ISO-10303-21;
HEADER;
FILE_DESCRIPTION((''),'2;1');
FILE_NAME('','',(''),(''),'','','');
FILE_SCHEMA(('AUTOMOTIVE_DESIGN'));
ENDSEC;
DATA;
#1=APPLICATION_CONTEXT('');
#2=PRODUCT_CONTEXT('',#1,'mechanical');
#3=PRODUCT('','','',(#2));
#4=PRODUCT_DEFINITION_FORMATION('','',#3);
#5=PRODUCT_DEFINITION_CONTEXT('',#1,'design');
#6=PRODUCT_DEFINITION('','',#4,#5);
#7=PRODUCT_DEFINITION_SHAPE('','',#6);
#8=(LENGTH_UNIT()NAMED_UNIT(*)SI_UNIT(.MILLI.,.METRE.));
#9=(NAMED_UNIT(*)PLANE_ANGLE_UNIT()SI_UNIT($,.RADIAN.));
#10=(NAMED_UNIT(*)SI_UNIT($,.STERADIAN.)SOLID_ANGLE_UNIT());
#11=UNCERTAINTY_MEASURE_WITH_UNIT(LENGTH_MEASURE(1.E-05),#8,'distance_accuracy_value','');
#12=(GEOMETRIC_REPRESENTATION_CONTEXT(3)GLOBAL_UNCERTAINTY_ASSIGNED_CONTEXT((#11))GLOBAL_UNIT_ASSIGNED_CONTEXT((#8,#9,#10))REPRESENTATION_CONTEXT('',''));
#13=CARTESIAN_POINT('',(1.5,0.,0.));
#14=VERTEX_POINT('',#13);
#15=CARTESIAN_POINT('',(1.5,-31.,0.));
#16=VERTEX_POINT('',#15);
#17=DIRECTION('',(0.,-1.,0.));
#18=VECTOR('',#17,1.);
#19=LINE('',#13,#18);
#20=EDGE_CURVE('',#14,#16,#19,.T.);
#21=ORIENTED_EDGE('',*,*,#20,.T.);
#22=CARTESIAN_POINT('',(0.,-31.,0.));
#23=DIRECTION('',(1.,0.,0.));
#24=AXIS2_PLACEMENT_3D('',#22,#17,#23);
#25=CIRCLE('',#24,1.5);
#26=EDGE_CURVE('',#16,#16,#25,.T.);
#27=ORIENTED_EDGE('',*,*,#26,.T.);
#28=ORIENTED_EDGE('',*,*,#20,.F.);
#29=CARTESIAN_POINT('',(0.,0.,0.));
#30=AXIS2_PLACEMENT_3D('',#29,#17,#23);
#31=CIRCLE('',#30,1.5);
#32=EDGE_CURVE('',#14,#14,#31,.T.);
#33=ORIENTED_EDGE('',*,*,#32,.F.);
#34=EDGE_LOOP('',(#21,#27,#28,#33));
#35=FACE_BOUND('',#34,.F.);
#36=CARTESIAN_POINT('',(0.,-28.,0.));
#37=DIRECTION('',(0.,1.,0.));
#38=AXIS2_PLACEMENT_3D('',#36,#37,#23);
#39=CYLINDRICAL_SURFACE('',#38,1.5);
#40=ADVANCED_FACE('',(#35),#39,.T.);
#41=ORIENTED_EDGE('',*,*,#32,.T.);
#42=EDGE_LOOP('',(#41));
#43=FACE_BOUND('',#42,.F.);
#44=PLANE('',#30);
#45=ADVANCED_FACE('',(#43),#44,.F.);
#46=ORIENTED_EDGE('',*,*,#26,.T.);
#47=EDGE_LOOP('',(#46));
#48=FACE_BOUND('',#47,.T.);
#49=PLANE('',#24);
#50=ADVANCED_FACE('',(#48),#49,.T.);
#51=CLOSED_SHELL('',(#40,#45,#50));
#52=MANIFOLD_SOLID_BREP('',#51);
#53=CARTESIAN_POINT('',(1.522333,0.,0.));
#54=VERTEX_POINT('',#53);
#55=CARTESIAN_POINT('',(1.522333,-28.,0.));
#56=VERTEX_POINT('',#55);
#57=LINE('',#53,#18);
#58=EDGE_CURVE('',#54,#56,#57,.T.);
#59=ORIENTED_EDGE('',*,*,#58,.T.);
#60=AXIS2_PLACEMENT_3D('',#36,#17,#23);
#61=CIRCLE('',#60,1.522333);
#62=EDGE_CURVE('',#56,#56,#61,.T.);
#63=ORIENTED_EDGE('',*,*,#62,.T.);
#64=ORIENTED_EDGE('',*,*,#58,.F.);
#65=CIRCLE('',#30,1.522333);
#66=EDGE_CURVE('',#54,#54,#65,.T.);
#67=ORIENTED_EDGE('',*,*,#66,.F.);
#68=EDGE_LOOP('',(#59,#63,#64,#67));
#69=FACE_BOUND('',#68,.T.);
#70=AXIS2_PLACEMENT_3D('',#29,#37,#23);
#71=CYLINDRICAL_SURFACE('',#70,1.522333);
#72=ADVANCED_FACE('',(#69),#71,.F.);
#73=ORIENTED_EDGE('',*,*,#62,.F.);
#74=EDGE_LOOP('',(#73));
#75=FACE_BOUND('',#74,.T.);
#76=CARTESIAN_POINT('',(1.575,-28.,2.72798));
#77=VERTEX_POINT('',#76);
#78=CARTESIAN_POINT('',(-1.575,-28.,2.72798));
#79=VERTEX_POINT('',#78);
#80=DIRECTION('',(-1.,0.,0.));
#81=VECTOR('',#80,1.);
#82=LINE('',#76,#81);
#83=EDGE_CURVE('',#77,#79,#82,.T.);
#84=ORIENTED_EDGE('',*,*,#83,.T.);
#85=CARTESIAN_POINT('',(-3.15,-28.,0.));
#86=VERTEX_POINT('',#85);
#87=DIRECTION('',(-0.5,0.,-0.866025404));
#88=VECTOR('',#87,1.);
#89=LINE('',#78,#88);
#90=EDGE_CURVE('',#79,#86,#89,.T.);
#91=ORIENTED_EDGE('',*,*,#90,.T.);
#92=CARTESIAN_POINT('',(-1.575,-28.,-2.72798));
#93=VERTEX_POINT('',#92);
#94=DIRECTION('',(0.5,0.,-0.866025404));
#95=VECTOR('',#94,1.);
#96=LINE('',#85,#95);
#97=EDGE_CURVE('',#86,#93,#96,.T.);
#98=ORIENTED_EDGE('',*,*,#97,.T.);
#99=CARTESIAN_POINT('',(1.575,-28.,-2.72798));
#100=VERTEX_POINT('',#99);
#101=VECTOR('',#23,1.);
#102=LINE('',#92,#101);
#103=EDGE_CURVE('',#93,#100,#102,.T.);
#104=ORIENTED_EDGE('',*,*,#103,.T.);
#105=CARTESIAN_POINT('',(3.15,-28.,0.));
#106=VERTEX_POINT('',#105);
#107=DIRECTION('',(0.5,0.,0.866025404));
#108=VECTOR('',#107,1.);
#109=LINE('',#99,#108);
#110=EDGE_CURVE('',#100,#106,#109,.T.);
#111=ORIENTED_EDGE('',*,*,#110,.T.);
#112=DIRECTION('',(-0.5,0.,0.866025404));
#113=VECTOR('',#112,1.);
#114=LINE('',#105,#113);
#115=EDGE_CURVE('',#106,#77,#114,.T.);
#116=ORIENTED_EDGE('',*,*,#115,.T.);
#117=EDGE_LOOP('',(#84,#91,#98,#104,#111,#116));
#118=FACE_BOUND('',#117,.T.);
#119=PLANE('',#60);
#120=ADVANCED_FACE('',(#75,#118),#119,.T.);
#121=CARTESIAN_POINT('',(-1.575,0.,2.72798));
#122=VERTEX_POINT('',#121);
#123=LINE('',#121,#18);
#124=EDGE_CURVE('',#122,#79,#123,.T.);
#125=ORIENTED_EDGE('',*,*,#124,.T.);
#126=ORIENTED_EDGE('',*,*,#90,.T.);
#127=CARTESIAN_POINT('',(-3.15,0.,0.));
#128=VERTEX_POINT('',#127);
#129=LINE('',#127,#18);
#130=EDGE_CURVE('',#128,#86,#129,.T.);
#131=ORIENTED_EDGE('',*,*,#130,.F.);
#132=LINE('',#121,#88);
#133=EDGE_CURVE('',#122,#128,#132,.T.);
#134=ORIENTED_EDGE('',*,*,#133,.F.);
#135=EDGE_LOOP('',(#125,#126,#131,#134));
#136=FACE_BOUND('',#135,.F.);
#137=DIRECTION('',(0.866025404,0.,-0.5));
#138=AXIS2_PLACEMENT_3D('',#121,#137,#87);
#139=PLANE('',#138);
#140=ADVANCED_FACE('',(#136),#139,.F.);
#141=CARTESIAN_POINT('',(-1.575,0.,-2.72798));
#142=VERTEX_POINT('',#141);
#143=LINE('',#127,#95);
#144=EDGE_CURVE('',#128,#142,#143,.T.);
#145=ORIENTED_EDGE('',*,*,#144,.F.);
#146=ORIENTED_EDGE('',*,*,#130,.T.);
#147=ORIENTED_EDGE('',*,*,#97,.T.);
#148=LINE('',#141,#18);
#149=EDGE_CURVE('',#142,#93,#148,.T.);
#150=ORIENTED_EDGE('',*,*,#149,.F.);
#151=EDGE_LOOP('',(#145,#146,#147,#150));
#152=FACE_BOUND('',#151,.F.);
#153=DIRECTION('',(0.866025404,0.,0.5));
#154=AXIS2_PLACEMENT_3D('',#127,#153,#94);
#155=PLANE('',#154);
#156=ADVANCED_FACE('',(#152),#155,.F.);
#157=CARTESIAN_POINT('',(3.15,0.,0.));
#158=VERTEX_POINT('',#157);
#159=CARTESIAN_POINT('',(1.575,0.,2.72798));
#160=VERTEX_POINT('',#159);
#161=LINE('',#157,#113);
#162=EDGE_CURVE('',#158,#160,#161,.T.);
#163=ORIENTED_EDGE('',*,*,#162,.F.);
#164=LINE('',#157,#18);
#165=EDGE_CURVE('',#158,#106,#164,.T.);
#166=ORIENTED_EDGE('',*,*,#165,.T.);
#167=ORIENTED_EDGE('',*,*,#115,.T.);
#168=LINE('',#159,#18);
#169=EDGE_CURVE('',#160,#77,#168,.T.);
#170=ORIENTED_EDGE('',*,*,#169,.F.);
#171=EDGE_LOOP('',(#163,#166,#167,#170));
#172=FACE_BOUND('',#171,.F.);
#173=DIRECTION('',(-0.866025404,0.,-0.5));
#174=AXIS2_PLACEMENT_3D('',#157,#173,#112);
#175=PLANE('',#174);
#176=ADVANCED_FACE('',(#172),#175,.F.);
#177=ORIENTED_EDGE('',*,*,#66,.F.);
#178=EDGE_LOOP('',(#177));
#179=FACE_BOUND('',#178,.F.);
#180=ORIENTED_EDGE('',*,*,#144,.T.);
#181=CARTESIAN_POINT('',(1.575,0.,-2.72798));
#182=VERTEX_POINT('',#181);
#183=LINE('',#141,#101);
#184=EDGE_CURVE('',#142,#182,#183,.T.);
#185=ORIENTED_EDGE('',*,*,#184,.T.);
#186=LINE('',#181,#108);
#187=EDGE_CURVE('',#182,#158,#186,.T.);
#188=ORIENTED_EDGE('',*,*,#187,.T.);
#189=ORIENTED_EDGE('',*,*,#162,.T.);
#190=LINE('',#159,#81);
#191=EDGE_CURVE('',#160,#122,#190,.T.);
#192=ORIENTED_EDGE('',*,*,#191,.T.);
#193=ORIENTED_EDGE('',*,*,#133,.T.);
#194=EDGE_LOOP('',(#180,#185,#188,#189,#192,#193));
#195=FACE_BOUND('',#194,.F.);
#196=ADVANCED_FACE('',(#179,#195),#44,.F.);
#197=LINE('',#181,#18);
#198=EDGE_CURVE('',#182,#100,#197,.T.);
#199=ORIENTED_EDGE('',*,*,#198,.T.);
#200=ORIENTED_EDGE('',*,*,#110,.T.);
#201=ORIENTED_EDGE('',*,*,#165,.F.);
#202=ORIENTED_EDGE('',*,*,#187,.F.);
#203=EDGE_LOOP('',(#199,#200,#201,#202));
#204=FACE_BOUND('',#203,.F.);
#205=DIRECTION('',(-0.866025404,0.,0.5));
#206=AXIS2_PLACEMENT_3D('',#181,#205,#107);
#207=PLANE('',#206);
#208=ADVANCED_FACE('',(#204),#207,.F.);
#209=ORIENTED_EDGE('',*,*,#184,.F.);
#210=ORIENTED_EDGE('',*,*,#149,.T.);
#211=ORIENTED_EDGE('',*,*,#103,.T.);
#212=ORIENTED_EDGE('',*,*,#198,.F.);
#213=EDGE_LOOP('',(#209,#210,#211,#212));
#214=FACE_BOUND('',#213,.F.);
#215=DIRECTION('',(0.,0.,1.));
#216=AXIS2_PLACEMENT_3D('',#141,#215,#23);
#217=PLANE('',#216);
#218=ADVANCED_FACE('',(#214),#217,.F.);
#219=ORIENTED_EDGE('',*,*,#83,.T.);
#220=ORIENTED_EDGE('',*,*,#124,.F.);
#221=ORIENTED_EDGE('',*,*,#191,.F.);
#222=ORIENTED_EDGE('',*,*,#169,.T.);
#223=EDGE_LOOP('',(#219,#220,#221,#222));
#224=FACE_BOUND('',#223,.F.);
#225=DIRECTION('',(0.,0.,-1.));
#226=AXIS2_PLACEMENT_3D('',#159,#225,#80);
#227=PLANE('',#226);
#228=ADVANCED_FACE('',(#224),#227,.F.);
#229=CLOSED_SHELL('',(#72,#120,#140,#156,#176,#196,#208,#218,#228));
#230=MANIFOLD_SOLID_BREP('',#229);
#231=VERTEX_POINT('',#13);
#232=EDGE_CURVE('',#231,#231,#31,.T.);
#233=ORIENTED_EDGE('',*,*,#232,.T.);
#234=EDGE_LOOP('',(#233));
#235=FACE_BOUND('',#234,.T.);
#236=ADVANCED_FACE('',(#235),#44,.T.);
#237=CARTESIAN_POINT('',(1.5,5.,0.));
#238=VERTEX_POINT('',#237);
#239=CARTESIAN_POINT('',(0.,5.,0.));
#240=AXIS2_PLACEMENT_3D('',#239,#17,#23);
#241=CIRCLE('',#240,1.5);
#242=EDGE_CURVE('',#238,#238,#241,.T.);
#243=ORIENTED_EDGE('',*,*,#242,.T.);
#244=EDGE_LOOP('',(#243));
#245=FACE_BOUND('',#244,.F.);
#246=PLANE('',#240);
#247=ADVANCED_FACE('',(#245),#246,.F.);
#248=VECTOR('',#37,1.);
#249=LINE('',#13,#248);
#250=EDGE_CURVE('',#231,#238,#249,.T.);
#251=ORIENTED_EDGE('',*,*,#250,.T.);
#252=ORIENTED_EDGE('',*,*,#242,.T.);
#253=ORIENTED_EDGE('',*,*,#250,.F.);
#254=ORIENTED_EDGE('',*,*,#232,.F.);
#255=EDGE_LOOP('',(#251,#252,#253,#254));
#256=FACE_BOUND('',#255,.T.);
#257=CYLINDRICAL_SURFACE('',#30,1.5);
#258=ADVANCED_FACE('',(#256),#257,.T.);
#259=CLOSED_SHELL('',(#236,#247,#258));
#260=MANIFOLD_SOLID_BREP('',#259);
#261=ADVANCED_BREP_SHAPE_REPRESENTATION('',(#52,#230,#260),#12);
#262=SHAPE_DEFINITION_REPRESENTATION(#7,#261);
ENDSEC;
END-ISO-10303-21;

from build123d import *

# Parameters (mm, degrees)
F0_R     = 1.5223329882
F1_DEPTH = 28
F0_R_2   = 1.5
F2_DEPTH = 5
F3_DEPTH = 3


with BuildPart() as f1:
    # F0 (on Front) → F1 (new body)
    with BuildSketch(Plane.XZ):
        Polygon((-1.575, -2.7279800219), (1.575, -2.7279800219), (3.15, 0), (1.575, 2.7279800219), (-1.575, 2.7279800219), (-3.15, 0), align=None)
        Circle(F0_R, mode=Mode.SUBTRACT)
    extrude(amount=F1_DEPTH)


with BuildPart() as f1b:
    # F0 (on Front) → F1, piece 2 (new body)
    with BuildSketch(Plane.XZ):
        Circle(F0_R_2)
    extrude(amount=F1_DEPTH)

    # F3 (add): a face of the model
    f3_faces = [f1b.faces().sort_by_distance(p)[0] for p in [
        (0, -28, 0),
    ]]
    extrude(f3_faces, amount=F3_DEPTH)


with BuildPart() as f2:
    # F0 (on Front) → F2 (new body)
    with BuildSketch(Plane.XZ):
        Circle(F0_R_2)
    extrude(amount=-F2_DEPTH)


solid = Compound([f1.part, f1b.part, f2.part])
